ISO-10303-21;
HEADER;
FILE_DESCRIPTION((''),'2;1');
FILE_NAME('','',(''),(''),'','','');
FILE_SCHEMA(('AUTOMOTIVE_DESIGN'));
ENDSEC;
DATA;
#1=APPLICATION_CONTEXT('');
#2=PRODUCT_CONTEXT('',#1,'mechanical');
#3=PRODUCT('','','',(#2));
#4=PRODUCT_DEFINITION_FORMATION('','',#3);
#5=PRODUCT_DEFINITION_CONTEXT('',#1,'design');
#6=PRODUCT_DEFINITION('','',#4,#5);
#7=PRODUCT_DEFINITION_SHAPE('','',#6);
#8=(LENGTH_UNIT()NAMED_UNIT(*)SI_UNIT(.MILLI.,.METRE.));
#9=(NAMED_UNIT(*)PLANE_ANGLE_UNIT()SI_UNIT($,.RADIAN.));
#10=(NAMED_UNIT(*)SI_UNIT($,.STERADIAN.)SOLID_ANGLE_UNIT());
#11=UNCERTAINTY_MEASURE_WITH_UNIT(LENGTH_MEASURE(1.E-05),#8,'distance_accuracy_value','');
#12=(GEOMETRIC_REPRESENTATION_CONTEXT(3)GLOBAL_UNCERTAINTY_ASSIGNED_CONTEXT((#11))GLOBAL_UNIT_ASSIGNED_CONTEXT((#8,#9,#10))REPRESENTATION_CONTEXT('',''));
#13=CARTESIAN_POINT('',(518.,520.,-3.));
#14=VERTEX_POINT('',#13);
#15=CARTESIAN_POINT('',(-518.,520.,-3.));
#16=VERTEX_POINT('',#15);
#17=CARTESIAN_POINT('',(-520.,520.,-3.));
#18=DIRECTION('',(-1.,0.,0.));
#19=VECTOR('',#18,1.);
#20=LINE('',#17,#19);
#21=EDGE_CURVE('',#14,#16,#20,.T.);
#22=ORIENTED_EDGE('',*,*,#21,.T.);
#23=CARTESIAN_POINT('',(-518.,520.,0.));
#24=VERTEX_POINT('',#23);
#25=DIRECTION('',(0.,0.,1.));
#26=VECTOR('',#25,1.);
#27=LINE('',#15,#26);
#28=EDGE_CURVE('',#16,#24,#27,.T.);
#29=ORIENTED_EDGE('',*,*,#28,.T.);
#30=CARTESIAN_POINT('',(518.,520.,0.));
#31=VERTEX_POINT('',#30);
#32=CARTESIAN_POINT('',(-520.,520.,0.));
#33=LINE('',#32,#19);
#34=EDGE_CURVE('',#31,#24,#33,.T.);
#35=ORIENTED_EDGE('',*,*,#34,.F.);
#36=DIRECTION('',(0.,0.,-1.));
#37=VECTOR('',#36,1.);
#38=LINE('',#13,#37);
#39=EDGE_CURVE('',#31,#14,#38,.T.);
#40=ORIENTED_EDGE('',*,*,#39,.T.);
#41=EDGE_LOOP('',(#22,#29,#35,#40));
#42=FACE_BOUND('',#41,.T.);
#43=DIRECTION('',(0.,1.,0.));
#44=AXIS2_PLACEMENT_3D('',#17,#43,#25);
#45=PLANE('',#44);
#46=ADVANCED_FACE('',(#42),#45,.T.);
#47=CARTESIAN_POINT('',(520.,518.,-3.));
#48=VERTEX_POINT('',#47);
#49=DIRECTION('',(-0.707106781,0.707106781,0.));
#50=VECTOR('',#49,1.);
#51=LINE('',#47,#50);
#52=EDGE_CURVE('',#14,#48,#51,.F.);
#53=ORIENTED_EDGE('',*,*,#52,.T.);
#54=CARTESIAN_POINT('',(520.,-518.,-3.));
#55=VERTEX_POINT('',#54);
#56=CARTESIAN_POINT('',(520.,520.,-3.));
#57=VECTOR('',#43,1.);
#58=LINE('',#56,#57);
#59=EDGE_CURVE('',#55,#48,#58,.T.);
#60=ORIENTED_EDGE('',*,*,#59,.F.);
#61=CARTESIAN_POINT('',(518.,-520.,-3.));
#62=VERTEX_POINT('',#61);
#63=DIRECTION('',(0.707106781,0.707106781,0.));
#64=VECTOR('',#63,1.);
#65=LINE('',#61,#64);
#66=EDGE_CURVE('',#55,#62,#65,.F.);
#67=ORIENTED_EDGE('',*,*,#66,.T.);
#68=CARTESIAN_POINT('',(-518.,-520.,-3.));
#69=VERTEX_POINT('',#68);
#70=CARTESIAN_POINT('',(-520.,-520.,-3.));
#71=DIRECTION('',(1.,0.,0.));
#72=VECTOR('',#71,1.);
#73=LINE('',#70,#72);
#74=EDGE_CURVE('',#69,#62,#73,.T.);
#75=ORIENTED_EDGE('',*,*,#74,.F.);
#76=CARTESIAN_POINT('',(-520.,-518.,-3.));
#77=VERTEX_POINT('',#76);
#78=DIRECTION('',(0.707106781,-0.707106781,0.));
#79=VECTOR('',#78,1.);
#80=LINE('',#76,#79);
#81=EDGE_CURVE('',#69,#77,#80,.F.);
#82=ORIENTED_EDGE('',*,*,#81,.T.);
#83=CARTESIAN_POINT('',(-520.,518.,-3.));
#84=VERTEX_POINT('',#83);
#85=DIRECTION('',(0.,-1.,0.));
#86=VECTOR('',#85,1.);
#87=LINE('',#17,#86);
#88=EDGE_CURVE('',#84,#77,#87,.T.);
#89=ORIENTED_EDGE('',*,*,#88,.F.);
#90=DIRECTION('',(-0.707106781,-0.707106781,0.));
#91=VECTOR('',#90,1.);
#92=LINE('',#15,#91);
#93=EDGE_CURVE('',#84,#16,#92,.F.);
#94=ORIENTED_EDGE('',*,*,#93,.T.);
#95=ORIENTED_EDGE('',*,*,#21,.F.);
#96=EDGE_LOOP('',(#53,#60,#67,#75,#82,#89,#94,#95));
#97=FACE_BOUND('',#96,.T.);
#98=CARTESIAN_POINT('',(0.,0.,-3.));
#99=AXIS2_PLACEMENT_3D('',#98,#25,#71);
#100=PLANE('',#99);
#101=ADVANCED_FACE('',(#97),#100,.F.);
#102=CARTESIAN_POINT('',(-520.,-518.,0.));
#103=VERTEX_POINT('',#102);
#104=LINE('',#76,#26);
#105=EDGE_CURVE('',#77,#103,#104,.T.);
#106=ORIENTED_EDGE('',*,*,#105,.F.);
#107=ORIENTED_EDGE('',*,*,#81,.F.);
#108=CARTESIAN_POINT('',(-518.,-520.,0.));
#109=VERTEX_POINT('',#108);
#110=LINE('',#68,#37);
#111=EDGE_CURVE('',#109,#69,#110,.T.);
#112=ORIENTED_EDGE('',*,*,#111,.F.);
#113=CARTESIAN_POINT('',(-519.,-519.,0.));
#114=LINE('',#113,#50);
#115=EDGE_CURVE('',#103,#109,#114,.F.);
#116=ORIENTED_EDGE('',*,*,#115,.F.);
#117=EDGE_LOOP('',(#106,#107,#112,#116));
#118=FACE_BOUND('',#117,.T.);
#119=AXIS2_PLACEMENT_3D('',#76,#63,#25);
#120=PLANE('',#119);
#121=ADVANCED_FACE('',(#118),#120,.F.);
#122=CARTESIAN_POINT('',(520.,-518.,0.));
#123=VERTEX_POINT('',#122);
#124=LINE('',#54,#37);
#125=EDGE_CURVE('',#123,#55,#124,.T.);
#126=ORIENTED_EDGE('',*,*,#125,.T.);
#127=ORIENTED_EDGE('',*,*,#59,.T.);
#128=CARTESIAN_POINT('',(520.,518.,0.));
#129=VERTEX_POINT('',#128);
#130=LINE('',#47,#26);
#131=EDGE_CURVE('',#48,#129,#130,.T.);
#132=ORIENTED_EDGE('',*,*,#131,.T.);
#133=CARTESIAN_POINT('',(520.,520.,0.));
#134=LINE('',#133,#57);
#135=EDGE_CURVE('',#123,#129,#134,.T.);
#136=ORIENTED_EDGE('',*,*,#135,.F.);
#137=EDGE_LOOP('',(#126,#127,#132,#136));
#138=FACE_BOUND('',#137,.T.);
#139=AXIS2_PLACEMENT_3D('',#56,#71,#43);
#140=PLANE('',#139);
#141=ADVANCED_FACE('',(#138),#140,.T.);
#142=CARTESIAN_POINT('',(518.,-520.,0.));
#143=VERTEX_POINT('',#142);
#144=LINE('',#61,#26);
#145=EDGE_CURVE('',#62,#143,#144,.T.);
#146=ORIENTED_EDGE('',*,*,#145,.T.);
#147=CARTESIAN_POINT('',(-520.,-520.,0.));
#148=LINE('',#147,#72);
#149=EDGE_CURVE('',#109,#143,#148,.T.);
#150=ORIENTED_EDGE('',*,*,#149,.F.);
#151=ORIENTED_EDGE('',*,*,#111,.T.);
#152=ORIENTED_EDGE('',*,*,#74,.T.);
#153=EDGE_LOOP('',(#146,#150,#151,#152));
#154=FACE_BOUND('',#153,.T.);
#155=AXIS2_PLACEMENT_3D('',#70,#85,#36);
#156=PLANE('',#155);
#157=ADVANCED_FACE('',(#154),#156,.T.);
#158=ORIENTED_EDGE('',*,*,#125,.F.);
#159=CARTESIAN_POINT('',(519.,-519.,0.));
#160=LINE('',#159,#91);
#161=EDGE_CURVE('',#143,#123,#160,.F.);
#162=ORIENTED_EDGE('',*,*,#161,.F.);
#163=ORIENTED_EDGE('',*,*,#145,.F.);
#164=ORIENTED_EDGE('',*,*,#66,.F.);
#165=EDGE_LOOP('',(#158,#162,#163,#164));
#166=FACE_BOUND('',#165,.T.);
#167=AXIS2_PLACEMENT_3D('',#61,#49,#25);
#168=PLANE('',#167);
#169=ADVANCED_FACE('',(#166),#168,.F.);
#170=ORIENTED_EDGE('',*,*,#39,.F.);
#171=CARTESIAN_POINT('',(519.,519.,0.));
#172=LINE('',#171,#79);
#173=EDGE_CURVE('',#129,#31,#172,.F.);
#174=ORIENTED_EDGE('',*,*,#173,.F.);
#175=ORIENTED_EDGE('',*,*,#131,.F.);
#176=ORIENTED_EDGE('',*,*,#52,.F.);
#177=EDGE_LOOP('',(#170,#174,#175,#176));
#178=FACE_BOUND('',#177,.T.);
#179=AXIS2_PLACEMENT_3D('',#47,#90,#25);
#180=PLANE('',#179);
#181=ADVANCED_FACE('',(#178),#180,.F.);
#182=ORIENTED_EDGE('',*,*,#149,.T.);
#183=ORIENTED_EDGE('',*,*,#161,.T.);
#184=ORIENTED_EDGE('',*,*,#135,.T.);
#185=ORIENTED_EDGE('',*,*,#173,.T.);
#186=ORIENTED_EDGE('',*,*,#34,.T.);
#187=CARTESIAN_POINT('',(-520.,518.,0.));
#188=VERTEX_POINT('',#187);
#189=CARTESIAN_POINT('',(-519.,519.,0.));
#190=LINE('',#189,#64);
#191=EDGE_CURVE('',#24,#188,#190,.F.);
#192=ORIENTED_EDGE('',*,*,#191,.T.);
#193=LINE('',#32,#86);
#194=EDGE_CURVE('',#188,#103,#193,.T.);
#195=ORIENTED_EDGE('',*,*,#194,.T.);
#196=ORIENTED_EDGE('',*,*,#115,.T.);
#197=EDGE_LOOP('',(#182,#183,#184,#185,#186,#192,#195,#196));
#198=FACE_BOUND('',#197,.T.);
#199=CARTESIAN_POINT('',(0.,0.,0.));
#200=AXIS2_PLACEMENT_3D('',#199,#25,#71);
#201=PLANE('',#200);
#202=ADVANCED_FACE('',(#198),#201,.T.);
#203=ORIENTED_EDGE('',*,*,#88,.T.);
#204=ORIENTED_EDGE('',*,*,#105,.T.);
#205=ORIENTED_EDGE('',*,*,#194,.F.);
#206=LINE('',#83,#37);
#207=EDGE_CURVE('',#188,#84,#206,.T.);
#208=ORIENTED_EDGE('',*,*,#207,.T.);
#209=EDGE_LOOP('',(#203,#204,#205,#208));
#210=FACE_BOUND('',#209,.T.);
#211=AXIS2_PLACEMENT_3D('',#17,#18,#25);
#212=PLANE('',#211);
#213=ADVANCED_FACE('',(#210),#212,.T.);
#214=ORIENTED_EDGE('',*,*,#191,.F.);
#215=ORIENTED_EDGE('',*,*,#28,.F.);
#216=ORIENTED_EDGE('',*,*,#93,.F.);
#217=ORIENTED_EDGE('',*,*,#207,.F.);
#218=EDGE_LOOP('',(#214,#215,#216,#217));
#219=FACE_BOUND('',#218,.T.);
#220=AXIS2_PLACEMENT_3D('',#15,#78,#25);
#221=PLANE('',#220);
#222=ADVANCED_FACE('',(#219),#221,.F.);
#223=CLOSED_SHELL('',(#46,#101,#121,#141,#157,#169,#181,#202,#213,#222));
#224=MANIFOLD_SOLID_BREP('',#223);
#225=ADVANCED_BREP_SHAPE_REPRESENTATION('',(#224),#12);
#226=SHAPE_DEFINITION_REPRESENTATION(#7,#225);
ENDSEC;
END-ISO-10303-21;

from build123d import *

# Parameters (mm, degrees)
SKETCH_1_W             = 1040
SKETCH_1_H             = 1040
SM_BASE_FLANGE_1_DEPTH = 3
CHAMFER_1_SIZE         = 2


# Sheet-metal steps are written as plain solids
with BuildPart() as part:
    # Sketch 1 → 基体-法兰1 (new body)
    with BuildSketch(Plane.XY):
        Rectangle(SKETCH_1_W, SKETCH_1_H)
    extrude(amount=-SM_BASE_FLANGE_1_DEPTH)

    # 倒角1
    chamfer_1_edges = [part.edges().sort_by_distance(p)[0] for p in [
        (520, -520, -1.5),
        (-520, -520, -1.5),
        (-520, 520, -1.5),
        (520, 520, -1.5),
    ]]
    chamfer(chamfer_1_edges, length=CHAMFER_1_SIZE)


solid = part.part
